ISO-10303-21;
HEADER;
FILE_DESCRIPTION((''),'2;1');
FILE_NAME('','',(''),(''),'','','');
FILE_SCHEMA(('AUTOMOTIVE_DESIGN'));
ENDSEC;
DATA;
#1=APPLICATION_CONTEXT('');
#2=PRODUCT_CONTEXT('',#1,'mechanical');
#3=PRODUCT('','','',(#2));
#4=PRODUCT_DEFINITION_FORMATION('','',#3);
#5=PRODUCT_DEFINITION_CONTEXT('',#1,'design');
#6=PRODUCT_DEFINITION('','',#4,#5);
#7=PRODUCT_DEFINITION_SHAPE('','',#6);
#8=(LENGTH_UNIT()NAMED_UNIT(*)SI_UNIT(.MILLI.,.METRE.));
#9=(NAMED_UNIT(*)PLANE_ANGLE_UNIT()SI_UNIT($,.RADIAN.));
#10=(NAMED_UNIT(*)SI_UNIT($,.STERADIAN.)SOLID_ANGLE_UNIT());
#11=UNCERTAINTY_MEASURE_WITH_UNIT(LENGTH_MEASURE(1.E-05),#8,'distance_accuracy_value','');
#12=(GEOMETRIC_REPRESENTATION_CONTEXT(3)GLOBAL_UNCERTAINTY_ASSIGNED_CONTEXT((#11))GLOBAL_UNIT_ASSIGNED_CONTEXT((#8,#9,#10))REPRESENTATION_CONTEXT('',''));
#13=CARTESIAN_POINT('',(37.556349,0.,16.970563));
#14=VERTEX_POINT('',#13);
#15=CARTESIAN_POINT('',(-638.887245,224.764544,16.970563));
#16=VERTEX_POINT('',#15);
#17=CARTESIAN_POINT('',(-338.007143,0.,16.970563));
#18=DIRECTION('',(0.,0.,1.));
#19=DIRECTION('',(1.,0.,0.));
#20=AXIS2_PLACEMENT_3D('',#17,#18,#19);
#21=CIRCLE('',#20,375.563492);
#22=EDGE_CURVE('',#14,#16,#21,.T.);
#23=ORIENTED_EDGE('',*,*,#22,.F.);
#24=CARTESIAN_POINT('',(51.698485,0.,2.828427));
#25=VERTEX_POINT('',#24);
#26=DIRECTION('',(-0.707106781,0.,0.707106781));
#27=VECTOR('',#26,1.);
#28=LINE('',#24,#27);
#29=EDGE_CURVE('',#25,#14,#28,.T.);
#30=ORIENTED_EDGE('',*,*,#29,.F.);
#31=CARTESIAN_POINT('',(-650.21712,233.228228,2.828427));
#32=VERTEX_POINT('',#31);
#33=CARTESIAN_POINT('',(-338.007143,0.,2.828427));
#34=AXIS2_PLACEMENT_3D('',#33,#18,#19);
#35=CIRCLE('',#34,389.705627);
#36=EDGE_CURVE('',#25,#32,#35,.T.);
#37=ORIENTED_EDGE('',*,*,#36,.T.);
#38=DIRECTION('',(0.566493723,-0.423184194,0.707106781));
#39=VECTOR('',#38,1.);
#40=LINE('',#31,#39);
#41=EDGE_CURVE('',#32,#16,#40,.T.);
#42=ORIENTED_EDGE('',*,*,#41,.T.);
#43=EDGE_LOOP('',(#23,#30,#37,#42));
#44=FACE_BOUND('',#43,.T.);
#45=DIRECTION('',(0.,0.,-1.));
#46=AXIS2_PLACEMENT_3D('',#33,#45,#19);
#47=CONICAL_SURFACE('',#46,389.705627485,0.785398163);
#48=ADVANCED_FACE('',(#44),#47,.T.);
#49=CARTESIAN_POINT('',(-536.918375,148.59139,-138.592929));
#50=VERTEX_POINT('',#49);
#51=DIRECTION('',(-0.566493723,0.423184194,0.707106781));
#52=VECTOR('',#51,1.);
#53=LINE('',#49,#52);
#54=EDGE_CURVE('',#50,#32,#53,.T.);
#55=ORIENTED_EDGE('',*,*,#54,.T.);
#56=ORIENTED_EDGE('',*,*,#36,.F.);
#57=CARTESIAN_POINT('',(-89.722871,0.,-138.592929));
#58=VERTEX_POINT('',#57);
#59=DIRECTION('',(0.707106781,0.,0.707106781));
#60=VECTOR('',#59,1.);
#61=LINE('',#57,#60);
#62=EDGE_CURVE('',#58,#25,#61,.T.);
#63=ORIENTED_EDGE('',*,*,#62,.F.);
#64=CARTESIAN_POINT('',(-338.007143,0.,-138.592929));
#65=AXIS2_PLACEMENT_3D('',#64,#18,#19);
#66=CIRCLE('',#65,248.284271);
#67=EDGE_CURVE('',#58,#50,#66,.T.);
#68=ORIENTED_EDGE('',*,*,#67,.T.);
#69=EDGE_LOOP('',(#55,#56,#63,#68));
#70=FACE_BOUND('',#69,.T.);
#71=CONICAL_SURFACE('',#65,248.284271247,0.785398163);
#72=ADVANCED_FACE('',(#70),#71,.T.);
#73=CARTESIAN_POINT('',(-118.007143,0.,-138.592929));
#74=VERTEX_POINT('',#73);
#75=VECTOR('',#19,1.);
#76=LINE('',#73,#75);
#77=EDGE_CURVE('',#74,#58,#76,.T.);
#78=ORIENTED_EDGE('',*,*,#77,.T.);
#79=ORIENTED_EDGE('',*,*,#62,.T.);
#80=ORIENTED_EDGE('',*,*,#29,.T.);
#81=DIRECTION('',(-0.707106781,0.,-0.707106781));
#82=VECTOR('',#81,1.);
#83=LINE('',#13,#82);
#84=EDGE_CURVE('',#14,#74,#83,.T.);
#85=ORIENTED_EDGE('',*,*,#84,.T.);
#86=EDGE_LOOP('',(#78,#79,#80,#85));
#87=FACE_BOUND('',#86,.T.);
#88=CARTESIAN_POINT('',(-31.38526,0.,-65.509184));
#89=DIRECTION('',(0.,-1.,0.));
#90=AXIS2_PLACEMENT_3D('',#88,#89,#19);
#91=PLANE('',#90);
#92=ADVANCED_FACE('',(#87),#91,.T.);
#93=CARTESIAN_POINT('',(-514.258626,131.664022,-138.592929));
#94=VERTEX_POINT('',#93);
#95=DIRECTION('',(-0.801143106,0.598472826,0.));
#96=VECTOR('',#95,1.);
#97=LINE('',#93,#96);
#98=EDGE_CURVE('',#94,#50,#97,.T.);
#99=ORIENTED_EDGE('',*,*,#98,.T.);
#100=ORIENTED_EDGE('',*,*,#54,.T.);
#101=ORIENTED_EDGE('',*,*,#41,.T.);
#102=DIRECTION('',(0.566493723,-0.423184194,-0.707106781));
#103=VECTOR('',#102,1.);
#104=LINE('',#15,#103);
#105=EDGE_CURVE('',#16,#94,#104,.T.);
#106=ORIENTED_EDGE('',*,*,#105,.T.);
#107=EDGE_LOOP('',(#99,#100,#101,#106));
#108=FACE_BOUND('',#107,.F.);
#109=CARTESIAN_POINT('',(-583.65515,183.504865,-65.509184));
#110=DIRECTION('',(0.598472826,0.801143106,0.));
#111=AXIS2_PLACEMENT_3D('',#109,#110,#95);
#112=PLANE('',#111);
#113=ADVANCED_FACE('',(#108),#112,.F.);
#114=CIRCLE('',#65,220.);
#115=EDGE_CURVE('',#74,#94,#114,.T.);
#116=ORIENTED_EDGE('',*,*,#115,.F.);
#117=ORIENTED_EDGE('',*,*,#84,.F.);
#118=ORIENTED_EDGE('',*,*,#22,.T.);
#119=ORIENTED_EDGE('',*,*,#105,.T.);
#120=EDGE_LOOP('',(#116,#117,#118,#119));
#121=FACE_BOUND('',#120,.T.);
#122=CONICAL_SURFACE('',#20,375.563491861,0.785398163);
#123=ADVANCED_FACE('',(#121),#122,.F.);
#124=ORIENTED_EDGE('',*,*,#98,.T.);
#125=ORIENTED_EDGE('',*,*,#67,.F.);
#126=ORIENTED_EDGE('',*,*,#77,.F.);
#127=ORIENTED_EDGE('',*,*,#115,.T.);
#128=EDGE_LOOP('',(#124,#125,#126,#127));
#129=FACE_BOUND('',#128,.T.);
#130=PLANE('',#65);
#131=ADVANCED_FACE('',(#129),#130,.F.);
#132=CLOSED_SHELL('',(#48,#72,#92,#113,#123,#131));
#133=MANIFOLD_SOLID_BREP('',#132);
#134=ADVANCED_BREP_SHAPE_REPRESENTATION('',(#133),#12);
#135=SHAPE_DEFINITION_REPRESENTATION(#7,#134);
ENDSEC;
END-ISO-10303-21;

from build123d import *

# Parameters (mm, degrees)
F1_ANGLE = 143.2394
F2_SCALE = 10


# Not quite as in the source:
# - a feature names something its author has since deleted; it is built from what else it names


with BuildPart() as f1:
    # F0 (on Front) → F1 (revolve)
    with BuildSketch(Plane.XZ):
        Polygon((24.8284271247, 1.4142135624), (38.9705627485, 15.5563491861), (37.5563491861, 16.9705627485), (22, 1.4142135624), align=None)
    revolve(axis=Axis((0, 0, 11), (0, 0, 1)), revolution_arc=F1_ANGLE)


with BuildPart() as f1_1:
    # F2: moved
    add(f1.part.scale(F2_SCALE).moved(Location((-338.0071426749, 0, -152.7350647363))))


solid = f1_1.part
